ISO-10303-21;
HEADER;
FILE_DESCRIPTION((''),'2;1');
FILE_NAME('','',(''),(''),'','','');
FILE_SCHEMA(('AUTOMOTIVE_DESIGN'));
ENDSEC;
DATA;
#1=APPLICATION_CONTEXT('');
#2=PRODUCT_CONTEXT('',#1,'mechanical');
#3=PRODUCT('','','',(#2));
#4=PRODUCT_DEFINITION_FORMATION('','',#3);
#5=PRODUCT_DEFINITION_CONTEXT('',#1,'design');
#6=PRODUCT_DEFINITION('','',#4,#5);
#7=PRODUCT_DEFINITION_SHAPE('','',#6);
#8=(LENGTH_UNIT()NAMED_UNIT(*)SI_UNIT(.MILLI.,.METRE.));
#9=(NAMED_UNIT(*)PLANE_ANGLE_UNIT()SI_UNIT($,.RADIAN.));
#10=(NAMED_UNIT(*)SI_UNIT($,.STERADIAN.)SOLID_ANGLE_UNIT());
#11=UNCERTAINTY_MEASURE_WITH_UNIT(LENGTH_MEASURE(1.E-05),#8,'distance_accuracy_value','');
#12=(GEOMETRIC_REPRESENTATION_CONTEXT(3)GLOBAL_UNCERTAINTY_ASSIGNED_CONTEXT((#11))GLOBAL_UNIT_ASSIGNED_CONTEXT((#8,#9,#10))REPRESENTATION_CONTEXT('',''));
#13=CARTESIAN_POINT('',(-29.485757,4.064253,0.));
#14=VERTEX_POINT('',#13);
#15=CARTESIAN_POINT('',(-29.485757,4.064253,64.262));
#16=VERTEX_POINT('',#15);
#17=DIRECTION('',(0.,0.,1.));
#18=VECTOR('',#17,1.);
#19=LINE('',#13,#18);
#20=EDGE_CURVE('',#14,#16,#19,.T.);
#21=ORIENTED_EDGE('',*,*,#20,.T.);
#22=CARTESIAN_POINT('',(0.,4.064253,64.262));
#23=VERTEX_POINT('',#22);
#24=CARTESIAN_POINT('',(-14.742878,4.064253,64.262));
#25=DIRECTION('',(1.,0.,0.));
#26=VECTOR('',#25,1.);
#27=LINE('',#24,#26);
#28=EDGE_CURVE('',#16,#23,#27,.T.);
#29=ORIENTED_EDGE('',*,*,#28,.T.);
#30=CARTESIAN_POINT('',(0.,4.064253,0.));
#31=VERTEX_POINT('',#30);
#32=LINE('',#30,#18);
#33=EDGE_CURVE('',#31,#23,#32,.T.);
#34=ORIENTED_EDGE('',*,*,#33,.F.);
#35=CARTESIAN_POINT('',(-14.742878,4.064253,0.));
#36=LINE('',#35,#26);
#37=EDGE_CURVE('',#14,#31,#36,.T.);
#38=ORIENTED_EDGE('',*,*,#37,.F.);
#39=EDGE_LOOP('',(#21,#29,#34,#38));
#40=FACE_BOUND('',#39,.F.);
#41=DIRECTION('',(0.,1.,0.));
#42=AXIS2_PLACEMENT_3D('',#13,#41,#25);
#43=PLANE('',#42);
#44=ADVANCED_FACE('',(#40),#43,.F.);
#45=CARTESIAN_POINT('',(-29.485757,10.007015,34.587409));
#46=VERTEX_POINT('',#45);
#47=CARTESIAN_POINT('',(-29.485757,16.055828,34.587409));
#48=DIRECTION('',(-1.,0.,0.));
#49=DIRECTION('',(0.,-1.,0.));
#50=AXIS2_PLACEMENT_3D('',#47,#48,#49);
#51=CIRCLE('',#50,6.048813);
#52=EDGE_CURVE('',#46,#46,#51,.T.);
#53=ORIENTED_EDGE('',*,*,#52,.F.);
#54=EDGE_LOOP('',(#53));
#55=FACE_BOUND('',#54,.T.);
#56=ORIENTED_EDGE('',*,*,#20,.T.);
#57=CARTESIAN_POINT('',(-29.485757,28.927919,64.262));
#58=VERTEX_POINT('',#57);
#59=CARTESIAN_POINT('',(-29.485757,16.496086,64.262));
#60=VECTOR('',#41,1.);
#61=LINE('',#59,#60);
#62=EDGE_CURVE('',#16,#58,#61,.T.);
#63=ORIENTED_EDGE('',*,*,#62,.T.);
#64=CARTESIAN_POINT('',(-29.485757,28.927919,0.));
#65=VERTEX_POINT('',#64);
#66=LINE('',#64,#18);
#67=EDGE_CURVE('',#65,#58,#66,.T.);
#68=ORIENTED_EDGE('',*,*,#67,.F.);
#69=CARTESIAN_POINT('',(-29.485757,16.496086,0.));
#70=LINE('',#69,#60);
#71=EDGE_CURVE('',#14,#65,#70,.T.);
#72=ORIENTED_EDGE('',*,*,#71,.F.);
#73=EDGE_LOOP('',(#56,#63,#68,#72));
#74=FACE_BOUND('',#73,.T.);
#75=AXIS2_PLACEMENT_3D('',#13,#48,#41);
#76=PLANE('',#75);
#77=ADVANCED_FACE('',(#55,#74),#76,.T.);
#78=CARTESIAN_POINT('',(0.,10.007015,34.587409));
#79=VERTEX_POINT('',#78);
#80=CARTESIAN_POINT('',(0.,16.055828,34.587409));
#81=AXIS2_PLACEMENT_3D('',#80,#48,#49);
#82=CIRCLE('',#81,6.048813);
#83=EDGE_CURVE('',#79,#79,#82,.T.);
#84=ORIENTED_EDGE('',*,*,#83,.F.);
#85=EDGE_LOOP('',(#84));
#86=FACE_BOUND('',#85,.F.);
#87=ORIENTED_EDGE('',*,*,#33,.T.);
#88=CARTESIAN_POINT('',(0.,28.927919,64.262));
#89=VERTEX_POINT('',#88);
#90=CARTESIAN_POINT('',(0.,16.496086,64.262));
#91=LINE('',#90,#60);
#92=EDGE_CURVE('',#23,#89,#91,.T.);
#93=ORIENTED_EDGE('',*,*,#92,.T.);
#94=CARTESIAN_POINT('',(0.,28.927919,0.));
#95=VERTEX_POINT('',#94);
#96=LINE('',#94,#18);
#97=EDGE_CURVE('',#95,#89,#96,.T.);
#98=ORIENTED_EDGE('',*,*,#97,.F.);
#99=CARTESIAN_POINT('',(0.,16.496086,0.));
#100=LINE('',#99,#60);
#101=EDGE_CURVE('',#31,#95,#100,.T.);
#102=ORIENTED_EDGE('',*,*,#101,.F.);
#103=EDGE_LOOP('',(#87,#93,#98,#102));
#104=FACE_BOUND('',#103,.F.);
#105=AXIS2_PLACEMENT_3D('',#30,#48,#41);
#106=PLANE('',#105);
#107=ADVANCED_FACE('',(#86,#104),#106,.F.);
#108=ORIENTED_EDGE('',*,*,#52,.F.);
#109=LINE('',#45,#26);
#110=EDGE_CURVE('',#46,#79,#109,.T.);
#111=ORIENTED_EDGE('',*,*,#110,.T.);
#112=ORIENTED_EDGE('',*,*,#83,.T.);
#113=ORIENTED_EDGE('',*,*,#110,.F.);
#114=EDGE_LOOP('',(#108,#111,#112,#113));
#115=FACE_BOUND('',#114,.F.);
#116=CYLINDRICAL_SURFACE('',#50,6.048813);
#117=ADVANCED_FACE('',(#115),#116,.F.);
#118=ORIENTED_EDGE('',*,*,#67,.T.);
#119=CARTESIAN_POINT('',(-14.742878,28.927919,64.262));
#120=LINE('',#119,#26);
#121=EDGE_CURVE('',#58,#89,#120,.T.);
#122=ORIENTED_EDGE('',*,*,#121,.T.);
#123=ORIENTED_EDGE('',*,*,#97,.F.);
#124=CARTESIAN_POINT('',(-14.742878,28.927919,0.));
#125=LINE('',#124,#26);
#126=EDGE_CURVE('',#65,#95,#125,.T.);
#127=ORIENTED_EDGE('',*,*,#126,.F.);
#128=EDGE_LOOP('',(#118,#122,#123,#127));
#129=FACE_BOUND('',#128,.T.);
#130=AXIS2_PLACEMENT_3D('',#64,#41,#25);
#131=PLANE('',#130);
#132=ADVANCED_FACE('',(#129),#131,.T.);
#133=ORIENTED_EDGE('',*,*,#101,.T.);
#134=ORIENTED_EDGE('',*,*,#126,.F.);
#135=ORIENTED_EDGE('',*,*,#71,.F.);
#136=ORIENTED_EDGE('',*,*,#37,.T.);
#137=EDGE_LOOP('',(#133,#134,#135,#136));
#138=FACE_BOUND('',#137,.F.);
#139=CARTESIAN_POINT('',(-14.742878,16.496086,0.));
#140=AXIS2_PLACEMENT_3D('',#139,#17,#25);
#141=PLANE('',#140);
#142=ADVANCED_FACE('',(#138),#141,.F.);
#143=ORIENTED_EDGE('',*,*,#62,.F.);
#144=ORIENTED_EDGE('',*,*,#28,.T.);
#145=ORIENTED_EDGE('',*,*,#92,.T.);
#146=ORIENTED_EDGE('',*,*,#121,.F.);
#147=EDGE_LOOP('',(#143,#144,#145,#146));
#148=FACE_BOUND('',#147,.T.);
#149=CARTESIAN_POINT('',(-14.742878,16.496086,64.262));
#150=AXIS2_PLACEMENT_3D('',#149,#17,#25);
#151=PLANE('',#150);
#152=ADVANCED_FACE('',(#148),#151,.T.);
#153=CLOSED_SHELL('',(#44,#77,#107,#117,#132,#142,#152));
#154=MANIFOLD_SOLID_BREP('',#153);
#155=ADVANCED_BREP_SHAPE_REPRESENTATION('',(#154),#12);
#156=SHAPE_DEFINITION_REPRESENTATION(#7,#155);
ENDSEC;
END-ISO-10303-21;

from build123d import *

# Parameters (mm, degrees)
F0_W       = 29.4857565314
F0_H       = 24.8636654578
F1_DEPTH   = 64.262
F2_R       = 6.0488126263
F1_FACE1_W = 24.8636654578
F1_FACE1_H = 64.262
F3_DEPTH   = 36.322


with BuildPart() as f1:
    # F0 (on Top) → F1 (new body)
    with BuildSketch(Plane.XY):
        with Locations((-14.7428782657, 16.4960857946)):
            Rectangle(F0_W, F0_H)
    extrude(amount=F1_DEPTH)

    # F2 (on face) + F1_face1 (on face) → F3 (cut)
    with BuildSketch(Plane(origin=(-29.4857565314, 0, 0), x_dir=(0, -1, 0), z_dir=(-1, 0, 0))):
        with Locations((-16.0558279604, 34.5874093473)):
            Circle(F2_R)
    with BuildSketch(Plane(origin=(0, 16.4960857946, 32.131), x_dir=(0, 1, 0), z_dir=(1, 0, 0))):
        Rectangle(F1_FACE1_W, F1_FACE1_H)
    extrude(amount=-F3_DEPTH, dir=(-1, 0, 0), mode=Mode.SUBTRACT)


solid = f1.part
